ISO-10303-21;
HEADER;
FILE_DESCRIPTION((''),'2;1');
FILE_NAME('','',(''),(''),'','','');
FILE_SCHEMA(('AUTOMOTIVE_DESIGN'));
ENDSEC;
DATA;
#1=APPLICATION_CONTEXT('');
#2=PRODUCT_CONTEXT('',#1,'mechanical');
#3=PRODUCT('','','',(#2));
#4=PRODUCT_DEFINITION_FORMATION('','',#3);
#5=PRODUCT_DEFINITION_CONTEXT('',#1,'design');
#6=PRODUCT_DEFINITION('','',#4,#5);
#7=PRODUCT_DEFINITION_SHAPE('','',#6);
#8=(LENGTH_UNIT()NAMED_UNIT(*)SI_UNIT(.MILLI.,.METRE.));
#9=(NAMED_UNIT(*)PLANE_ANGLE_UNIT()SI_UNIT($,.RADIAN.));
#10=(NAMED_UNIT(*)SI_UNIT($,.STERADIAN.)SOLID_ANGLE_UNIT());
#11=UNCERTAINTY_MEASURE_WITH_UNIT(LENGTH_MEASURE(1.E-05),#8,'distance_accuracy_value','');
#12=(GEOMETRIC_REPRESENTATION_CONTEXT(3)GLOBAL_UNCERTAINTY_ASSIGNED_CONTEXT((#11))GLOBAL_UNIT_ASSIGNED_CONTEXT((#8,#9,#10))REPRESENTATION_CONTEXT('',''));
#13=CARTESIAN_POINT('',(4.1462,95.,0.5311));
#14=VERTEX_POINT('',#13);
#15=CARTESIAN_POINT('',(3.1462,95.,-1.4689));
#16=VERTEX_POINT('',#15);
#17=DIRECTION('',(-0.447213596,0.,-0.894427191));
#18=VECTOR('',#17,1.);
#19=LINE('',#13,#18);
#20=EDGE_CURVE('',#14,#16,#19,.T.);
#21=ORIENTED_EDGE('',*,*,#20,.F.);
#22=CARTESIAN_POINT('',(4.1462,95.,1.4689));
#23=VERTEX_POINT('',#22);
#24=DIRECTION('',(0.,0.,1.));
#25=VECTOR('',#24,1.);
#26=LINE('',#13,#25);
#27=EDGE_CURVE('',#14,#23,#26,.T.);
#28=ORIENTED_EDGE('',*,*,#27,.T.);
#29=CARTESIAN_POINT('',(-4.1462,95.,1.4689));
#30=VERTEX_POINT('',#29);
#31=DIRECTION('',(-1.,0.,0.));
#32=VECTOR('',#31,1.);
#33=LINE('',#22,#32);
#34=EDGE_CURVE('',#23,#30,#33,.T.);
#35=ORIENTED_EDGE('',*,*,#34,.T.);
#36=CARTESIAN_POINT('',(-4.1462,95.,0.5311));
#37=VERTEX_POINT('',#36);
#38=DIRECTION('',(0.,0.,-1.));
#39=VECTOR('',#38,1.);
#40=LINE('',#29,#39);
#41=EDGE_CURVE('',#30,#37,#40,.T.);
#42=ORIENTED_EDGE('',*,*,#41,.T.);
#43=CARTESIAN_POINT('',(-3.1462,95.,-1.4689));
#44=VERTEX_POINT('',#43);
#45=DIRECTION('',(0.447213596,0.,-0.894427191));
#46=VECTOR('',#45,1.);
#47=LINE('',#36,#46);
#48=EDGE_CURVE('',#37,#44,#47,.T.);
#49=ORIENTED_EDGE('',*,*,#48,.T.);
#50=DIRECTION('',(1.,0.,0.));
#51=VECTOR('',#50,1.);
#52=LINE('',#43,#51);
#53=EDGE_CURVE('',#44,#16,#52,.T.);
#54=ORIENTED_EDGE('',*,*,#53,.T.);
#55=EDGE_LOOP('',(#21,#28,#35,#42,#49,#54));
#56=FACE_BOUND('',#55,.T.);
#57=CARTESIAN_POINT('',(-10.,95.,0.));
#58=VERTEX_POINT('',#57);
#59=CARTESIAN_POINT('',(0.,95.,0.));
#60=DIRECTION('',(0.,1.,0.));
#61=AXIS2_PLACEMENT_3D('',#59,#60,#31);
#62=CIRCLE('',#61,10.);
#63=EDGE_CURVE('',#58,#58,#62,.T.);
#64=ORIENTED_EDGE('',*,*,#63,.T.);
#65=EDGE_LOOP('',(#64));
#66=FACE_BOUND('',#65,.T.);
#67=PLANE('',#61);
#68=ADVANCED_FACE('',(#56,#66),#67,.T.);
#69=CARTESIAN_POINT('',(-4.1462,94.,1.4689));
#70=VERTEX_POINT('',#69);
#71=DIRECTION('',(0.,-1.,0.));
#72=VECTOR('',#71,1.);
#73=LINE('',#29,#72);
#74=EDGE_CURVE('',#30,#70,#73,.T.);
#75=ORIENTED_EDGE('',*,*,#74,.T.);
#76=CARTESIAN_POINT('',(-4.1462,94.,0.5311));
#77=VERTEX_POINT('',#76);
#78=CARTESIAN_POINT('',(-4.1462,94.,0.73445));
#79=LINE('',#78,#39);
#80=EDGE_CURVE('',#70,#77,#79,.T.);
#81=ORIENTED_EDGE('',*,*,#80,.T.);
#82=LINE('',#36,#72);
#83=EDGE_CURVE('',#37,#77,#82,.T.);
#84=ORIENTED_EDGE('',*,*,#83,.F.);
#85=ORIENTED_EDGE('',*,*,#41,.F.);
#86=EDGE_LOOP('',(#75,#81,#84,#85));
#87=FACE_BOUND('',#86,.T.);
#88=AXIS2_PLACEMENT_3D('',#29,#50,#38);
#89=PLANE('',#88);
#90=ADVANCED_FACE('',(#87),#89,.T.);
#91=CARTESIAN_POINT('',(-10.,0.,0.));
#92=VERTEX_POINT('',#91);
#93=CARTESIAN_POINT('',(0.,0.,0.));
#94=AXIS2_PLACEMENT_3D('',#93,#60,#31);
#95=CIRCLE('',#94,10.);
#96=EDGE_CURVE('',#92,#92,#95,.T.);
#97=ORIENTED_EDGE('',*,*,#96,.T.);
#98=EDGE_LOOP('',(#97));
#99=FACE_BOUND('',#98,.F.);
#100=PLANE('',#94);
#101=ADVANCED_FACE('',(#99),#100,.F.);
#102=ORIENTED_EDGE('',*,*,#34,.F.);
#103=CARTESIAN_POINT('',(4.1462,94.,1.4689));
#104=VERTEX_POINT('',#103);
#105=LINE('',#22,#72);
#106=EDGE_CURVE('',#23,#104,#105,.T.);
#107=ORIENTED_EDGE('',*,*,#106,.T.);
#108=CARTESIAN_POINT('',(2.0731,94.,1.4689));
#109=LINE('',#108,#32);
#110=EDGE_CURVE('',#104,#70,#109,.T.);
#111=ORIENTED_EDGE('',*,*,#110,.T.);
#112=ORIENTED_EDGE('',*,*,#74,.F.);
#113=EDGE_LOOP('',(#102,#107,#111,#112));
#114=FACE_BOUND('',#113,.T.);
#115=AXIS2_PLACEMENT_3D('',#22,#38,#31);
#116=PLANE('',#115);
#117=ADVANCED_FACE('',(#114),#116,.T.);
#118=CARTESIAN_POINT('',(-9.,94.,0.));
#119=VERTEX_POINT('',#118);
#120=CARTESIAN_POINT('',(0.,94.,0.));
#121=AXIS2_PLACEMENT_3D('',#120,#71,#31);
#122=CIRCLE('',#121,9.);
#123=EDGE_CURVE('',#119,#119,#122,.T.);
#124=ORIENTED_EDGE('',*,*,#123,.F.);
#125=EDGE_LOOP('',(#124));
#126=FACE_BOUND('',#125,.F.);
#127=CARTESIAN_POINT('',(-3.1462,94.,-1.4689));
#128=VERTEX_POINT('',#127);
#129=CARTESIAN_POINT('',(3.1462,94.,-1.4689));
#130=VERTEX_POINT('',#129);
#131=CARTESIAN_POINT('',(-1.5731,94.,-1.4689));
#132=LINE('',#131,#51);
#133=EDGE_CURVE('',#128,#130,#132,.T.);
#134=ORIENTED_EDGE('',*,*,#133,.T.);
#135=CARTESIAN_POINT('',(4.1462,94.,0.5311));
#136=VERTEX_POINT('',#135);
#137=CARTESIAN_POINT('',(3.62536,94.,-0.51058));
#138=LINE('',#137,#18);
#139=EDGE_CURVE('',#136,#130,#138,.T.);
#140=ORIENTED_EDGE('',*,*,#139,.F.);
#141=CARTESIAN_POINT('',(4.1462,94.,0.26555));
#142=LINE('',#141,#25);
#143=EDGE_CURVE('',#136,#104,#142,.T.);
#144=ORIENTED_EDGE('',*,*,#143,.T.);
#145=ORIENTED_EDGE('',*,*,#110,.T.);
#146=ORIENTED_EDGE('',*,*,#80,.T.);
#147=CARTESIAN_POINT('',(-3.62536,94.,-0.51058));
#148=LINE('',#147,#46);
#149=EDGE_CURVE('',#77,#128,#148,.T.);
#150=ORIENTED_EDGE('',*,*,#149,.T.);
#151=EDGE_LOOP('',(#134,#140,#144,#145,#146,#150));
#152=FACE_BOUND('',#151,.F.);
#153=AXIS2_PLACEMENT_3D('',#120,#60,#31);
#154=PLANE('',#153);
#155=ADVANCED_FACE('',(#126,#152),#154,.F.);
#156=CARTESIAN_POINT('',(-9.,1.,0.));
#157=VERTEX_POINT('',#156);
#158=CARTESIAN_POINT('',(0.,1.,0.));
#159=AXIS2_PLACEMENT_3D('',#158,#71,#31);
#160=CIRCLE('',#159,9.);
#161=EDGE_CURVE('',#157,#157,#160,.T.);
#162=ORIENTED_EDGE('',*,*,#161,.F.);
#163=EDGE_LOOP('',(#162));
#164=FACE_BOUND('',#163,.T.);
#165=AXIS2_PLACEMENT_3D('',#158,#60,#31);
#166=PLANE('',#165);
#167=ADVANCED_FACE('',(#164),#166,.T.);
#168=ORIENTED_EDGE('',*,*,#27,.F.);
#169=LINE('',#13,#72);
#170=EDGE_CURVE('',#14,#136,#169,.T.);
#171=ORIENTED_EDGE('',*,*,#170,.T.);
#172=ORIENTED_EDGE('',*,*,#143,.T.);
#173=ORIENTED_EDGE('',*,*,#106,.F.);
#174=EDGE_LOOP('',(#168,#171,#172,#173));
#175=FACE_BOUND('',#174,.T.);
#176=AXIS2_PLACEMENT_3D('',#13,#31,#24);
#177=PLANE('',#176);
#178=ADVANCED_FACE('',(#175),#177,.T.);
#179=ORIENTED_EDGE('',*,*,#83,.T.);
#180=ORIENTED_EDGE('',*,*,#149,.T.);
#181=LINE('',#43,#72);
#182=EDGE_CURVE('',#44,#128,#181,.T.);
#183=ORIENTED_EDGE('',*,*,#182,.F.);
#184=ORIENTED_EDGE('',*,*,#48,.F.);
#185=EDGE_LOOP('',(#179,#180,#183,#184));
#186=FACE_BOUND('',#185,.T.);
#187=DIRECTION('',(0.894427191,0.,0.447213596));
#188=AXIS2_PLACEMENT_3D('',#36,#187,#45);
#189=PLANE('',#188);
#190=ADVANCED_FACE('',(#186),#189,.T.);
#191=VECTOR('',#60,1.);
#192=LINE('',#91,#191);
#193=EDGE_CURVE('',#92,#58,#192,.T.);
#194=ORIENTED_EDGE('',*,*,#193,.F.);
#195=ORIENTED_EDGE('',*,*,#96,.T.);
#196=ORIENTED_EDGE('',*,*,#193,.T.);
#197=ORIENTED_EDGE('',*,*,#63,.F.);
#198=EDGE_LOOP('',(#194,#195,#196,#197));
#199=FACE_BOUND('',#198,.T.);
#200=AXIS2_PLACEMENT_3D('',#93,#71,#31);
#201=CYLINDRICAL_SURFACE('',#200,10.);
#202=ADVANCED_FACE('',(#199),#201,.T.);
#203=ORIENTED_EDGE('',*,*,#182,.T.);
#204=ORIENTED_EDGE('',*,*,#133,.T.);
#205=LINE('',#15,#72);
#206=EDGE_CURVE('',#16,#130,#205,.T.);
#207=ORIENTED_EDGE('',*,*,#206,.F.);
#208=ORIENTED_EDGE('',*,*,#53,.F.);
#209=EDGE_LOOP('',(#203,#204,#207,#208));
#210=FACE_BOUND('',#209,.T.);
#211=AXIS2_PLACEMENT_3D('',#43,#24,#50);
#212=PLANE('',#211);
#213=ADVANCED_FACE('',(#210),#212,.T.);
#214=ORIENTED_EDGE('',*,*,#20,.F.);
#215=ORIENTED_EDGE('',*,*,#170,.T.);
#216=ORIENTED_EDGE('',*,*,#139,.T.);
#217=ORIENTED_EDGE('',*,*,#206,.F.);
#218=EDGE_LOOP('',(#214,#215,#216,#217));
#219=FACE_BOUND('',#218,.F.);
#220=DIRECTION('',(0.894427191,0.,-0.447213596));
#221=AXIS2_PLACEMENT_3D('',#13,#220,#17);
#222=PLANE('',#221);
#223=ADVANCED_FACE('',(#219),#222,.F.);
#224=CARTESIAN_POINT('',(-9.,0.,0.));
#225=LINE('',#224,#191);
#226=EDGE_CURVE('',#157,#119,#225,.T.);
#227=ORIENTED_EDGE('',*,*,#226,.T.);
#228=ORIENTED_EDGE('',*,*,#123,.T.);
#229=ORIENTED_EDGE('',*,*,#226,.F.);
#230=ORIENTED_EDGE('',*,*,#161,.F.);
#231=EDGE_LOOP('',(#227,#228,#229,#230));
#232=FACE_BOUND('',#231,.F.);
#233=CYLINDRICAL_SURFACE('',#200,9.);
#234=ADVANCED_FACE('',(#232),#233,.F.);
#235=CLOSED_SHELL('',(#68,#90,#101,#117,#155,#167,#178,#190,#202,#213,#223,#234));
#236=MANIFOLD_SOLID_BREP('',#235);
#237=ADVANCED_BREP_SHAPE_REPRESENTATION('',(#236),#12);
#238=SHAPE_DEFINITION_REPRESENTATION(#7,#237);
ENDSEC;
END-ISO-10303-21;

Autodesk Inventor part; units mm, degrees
ref_plane "YZ Plane" through (0, 0, 0) normal (1, 0, 0) x (0, 1, 0)
ref_plane "XZ Plane" through (0, 0, 0) normal (0, 1, 0) x (-1, 0, 0)
ref_plane "XY Plane" through (0, 0, 0) normal (0, 0, 1) x (1, 0, 0)
sketch "Sketch1" plane through (0, 0, 0) normal (0, 1, 0) x (-1, 0, 0)
  circle A0 centre (0, 0) radius 10
  dimension "d0" = 20
extrude "Extrusion1" add sketch "Sketch1" along normal blind 95
shell "Shell1" thickness 1 removed faces 0
sketch "Sketch3" plane through (0, 95, 0) normal (0, 1, 0) x (1, 0, 0)
  circle A0 centre (0, 0) radius 10 projected
  line L0 (-3.1462, 1.4689) -> (3.1462, 1.4689)
  line L1 (4.1462, -0.5311) -> (4.1462, -1.4689)
  line L2 (4.1462, -1.4689) -> (-4.1462, -1.4689)
  line L3 (-4.1462, -1.4689) -> (-4.1462, -0.5311)
  line L4 (-4.1462, 1.4689) -> (4.1462, -1.4689) construction
  line L5 (4.1462, 1.4689) -> (-4.1462, -1.4689) construction
  line L6 (-4.1462, -0.5311) -> (-3.1462, 1.4689)
  line L7 (4.1462, -0.5311) -> (3.1462, 1.4689)
  dimension "d8" = 2
  dimension "d9" = 1
  dimension "d10" = 2
  dimension "d11" = 1
extrude "Extrusion3" cut sketch "Sketch3" against normal blind 5 contours L0 L7 L1 L2 L3 L6
properties part number "blank"
